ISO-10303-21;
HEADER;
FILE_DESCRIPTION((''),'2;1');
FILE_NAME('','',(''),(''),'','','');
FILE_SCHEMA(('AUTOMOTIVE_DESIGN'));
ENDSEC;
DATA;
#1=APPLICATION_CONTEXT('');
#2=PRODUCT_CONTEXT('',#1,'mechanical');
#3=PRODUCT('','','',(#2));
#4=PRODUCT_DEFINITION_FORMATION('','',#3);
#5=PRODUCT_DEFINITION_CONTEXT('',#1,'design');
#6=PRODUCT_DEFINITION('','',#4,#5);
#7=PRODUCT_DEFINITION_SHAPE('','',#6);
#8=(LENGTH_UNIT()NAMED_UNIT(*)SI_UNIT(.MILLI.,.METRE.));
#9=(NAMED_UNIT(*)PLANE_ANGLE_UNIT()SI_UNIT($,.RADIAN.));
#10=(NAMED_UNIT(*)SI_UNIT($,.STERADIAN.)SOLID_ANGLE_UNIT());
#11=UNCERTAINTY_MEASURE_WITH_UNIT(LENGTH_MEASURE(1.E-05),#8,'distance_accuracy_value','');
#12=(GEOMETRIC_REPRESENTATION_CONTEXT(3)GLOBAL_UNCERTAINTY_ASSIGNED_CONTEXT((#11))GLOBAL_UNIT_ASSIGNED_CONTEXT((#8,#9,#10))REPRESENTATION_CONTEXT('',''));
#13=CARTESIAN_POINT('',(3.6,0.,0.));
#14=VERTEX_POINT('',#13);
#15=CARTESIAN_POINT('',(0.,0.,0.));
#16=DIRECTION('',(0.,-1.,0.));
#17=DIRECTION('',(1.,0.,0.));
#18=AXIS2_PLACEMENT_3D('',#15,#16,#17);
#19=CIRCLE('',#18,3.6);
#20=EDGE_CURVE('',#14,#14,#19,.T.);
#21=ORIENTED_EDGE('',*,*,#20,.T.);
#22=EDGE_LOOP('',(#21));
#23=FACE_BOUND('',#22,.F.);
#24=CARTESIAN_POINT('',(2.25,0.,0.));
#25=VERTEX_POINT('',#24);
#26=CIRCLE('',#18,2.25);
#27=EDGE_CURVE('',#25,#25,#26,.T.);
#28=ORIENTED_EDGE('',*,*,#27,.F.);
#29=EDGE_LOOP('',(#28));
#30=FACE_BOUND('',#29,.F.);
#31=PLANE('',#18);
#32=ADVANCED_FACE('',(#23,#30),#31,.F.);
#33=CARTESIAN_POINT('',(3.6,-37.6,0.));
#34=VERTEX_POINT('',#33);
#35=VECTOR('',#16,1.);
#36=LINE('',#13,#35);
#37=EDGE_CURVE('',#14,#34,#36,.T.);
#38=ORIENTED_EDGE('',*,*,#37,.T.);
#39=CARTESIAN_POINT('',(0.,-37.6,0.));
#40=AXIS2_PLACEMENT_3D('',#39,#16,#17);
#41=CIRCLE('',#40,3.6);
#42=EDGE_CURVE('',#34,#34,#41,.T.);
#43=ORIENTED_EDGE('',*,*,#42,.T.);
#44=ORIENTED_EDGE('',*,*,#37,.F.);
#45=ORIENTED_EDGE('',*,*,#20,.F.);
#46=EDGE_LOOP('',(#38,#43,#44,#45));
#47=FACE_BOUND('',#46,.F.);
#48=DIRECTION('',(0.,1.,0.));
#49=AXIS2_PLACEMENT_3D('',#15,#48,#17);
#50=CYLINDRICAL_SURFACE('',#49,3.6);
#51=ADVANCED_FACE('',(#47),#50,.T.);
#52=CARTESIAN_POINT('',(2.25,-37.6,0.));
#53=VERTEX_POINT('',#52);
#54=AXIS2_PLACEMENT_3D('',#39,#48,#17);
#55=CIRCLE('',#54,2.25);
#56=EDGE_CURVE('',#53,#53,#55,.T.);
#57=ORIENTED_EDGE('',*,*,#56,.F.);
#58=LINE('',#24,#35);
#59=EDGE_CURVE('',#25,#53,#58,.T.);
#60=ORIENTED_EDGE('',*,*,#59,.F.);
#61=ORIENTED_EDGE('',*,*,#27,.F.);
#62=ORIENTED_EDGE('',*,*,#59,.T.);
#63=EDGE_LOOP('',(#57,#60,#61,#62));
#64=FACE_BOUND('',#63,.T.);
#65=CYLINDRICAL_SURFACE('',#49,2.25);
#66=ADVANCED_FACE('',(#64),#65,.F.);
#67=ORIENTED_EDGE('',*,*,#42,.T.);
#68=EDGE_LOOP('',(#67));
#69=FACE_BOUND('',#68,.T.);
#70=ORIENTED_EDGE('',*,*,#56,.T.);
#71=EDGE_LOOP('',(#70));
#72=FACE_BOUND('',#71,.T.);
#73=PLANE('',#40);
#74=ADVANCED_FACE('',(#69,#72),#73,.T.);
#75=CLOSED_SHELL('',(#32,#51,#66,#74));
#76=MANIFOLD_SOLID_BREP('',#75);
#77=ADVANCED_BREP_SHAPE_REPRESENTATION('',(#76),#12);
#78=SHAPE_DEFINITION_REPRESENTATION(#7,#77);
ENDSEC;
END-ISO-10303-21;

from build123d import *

# Parameters (mm, degrees)
F0_R     = 3.6
F1_DEPTH = 37.6
F2_R     = 2.25
F3_DEPTH = 38.1


# Not quite as in the source:
# - a feature of the source that left no trace in its solid (it failed there, or was rolled back) is left out
# - the program builds the solid bodies; features that only make, move or delete a surface that nothing else refers to are left out


with BuildPart() as f1:
    # F0 (on Front) → F1 (new body)
    with BuildSketch(Plane.XZ):
        Circle(F0_R)
    extrude(amount=F1_DEPTH)

    # F2 (on Front) → F3 (cut)
    with BuildSketch(Plane.XZ):
        Circle(F2_R)
    extrude(amount=F3_DEPTH, mode=Mode.SUBTRACT)


solid = f1.part
